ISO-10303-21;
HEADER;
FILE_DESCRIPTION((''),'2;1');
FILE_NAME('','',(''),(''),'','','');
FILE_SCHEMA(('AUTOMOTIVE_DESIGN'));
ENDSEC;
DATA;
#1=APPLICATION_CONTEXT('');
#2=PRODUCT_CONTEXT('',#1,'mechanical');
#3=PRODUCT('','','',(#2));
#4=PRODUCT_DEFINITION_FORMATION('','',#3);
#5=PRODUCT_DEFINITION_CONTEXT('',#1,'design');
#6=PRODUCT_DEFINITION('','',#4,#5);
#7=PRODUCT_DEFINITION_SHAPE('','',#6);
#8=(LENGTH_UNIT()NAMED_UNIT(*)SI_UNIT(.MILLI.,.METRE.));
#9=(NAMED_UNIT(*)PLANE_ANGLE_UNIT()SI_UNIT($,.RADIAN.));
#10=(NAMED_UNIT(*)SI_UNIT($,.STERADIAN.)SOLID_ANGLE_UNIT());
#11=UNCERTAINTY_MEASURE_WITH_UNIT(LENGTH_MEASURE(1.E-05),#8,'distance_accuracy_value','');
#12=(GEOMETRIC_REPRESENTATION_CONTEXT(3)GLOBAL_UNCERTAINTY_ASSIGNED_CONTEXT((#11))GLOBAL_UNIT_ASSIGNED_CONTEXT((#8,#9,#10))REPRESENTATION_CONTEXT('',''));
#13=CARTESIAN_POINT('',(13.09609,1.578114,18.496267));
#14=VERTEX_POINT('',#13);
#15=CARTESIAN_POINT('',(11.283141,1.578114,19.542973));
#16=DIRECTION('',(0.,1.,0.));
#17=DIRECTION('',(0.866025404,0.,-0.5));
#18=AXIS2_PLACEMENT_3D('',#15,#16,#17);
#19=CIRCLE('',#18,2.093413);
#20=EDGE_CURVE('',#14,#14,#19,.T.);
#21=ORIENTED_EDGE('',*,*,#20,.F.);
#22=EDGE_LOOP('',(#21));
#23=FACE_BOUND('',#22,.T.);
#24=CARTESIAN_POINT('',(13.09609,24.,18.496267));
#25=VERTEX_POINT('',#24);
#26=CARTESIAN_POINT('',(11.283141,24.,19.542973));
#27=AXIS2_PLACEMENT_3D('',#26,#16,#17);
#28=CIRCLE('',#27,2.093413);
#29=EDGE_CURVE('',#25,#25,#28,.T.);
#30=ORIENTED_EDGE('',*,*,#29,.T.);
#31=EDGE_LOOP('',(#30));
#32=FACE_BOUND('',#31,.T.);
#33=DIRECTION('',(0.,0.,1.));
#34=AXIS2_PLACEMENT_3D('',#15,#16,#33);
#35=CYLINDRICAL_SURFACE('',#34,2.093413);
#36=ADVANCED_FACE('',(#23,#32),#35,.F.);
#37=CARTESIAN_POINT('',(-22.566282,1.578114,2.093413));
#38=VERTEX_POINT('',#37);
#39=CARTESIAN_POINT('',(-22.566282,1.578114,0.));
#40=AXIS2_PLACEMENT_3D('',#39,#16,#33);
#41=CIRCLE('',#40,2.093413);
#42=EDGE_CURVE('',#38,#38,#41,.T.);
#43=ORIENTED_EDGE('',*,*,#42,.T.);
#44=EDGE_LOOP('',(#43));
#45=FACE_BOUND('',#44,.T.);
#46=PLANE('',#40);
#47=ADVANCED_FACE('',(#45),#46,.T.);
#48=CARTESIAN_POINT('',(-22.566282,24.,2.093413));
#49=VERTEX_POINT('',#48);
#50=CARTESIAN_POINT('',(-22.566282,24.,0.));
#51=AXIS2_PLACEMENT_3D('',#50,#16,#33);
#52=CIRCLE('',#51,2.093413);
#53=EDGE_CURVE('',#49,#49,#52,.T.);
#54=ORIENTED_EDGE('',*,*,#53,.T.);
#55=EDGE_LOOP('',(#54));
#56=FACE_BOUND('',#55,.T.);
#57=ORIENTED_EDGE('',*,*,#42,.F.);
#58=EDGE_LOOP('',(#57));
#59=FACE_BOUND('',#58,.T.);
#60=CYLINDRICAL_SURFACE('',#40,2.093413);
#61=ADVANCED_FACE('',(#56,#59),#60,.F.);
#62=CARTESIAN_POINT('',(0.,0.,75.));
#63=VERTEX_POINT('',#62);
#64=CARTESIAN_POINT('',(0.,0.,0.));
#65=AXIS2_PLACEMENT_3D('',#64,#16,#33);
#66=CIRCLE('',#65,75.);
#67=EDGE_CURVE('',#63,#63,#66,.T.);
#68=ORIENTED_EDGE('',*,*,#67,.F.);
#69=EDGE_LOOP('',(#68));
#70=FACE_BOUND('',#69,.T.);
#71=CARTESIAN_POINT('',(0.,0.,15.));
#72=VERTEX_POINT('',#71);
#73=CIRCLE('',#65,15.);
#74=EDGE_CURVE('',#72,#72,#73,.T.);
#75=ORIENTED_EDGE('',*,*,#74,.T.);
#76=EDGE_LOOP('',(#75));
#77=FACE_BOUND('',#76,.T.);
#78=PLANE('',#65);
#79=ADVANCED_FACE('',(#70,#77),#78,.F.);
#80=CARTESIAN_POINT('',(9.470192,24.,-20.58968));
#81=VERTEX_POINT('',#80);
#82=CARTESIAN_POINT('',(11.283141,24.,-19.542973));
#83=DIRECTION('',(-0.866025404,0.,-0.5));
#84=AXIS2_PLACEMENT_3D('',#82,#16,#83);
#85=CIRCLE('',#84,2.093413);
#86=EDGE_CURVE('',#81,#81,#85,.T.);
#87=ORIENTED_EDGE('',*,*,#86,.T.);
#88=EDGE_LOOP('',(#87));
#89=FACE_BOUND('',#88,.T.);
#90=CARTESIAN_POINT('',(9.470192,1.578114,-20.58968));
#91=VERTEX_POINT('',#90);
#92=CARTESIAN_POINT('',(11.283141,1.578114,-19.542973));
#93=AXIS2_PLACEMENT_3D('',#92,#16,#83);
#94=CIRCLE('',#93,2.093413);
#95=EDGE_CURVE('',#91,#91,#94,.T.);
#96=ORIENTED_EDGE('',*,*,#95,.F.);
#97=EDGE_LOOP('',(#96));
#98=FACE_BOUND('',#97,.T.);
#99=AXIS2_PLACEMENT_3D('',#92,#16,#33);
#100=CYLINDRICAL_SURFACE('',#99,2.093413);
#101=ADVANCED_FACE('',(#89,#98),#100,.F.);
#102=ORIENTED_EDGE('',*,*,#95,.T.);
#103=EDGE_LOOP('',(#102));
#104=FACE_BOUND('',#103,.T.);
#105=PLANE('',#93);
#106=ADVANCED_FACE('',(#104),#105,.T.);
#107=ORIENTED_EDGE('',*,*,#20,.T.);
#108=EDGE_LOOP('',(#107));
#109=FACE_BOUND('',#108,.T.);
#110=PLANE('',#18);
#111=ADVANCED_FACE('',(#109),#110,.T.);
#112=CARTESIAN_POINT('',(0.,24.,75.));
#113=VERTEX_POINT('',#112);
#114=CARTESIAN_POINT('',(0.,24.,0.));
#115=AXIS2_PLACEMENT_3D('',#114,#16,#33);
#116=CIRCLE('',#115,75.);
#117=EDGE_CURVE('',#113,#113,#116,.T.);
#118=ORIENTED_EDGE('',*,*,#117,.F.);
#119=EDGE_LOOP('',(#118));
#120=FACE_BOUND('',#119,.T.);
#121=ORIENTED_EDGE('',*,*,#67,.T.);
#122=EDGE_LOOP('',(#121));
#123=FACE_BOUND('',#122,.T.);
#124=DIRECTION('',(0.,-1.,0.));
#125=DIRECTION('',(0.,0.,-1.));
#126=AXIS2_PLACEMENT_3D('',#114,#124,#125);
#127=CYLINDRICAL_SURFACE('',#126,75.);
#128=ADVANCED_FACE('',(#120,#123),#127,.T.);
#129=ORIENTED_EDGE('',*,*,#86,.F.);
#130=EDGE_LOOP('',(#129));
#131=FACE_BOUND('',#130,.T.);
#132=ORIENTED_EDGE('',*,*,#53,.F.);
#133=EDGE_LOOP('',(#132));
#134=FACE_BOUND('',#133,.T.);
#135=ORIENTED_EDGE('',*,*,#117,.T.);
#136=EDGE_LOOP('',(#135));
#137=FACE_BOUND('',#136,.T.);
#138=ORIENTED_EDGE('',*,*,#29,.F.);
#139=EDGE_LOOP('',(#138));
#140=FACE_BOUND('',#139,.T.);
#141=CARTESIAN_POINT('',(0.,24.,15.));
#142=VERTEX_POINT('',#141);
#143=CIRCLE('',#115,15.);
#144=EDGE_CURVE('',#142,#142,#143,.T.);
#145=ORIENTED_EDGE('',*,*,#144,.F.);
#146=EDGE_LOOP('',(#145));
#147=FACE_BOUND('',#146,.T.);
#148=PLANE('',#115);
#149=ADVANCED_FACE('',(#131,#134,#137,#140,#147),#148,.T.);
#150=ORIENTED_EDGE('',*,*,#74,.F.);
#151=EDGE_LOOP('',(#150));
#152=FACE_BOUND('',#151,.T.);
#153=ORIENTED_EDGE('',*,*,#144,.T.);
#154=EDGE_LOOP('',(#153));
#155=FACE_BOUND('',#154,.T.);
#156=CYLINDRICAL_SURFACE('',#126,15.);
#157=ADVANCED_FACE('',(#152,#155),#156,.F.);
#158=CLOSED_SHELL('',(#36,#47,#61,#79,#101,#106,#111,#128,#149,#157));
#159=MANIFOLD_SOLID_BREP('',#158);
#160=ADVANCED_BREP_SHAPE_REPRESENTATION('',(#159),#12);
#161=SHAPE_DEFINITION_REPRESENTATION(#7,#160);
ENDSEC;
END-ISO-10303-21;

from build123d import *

# Parameters (mm, degrees)
SKETCH1_R           = 75
BOSS_EXTRUDE1_DEPTH = 24
SKETCH2_R           = 15
CUT_EXTRUDE1_DEPTH  = 109.747413762
SKETCH3_R           = 2.093413073
CUT_EXTRUDE2_DEPTH  = 22.421886393
CIRPATTERN1_COUNT   = 3


with BuildPart() as part:
    # Sketch1 → Boss-Extrude1 (new body)
    with BuildSketch(Plane(origin=(0, 0, 0), x_dir=(1, 0, 0), z_dir=(0, 1, 0))):
        Circle(SKETCH1_R)
    extrude(amount=BOSS_EXTRUDE1_DEPTH)

    # Sketch2 → Cut-Extrude1 (cut, through all)
    with BuildSketch(Plane(origin=(0, 0, 0), x_dir=(1, 0, 0), z_dir=(0, 1, 0))):
        Circle(SKETCH2_R)
    extrude(amount=CUT_EXTRUDE1_DEPTH, mode=Mode.SUBTRACT)

    # Sketch3 → Cut-Extrude2 (cut)
    with BuildSketch(Plane(origin=(0, 24, 0), x_dir=(1, 0, 0), z_dir=(0, 1, 0))):
        with Locations((-22.566281903, 0)):
            Circle(SKETCH3_R)
    cut_extrude2 = extrude(amount=-CUT_EXTRUDE2_DEPTH, mode=Mode.SUBTRACT)

    # CirPattern1: Cut-Extrude2 ×3 about axis
    cirpattern1_axis = Axis((0, 0, 0), (0, 1, 0))
    for i in range(1, CIRPATTERN1_COUNT):
        add(cut_extrude2.rotate(cirpattern1_axis, i * 360 / CIRPATTERN1_COUNT), mode=Mode.SUBTRACT)


solid = part.part
